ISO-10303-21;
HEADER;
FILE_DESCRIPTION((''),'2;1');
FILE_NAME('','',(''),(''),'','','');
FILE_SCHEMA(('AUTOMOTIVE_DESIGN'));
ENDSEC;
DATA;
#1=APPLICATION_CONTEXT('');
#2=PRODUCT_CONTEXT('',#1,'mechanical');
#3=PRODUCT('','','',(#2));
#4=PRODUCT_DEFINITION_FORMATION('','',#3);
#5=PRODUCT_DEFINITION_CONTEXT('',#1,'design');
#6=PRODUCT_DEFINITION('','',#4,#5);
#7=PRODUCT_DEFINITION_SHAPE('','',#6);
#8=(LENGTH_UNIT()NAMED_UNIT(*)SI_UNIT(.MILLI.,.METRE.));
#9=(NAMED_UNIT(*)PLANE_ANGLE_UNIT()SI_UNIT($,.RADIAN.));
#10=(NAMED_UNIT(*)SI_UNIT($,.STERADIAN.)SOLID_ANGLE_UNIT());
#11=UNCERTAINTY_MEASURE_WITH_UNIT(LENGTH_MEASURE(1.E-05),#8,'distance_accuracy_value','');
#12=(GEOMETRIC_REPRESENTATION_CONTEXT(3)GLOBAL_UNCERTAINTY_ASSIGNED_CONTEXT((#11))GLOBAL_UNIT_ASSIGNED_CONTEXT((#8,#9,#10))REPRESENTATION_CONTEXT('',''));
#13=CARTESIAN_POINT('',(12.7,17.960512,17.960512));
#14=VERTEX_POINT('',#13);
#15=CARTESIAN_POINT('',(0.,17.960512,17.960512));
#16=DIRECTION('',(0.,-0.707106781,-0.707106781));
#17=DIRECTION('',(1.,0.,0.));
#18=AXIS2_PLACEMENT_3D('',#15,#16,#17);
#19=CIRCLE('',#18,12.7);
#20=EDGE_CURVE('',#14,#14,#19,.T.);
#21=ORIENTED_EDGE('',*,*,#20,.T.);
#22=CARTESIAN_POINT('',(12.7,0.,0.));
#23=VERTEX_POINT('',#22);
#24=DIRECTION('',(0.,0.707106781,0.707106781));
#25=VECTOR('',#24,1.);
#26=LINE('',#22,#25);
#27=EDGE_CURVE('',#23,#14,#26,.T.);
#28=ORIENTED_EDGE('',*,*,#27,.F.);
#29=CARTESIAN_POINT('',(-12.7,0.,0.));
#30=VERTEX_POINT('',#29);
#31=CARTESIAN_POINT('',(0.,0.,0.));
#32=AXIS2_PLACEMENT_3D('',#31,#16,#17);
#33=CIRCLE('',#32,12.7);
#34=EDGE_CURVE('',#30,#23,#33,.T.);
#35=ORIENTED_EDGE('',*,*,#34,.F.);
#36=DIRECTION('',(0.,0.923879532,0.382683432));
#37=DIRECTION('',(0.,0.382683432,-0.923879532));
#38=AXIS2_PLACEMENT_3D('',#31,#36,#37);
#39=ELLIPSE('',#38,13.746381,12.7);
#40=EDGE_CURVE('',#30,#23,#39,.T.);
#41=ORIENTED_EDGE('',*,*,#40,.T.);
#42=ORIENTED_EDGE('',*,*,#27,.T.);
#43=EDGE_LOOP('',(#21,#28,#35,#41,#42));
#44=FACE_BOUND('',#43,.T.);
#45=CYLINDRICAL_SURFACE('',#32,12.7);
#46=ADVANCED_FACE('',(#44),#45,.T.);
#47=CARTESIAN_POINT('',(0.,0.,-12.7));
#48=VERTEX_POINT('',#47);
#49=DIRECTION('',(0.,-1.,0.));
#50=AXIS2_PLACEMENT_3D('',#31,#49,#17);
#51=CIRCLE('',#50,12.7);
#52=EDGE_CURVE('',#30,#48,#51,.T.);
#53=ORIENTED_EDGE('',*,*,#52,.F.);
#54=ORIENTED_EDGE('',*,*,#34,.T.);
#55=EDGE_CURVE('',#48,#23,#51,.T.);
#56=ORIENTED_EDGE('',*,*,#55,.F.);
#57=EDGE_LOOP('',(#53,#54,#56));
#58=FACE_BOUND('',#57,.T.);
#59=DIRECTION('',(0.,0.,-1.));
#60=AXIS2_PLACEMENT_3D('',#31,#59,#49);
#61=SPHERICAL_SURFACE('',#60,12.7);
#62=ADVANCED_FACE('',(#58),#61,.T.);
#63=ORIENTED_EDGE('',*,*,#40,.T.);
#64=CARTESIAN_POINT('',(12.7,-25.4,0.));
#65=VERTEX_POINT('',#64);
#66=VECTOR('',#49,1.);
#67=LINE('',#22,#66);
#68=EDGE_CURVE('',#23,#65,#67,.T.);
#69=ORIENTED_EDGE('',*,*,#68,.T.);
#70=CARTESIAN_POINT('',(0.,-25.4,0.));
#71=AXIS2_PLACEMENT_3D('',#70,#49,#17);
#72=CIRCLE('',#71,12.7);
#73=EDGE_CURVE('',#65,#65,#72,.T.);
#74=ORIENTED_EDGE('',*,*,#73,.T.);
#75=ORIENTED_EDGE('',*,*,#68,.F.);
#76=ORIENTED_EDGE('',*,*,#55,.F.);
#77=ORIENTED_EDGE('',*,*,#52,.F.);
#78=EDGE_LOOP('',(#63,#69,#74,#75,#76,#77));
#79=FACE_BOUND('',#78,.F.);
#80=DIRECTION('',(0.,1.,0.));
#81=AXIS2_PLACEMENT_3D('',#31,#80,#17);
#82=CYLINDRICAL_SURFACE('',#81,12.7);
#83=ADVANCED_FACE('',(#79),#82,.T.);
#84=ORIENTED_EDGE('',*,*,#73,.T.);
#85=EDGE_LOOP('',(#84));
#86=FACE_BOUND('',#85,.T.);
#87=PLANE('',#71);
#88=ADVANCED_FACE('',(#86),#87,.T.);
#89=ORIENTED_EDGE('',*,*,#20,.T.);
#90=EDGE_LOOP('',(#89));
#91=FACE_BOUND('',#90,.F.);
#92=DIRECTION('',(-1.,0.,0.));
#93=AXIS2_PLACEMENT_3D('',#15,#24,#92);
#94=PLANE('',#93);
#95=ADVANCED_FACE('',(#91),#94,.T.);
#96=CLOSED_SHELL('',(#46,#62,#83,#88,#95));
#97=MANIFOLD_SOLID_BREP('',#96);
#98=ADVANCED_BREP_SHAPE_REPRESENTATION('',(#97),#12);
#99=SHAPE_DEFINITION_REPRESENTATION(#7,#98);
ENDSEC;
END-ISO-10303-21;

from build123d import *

# Parameters (mm, degrees)
F5_R     = 12.7
F6_DEPTH = 25.4


# Not quite as in the source:
# - a feature of the source that left no trace in its solid (it failed there, or was rolled back) is left out
# - a pattern or mirror of a feature is missing from the dataset's text; its kind, count and spacing are read off the source's solid


with BuildPart() as f4:
    # F3 (on Right) → F4 (revolve)
    with BuildSketch(Plane.YZ):
        with BuildLine():
            Line((0, -12.7), (0, 12.7))
            ThreePointArc((0, 12.7), (-12.7, 0), (0, -12.7))
        make_face()
    revolve(axis=Axis((0, 0, -2.0618988201), (0, 0, -1)))

    # F5 (on Front) → F6 (join)
    with BuildSketch(Plane.XZ):
        Circle(F5_R)
    f6 = extrude(amount=F6_DEPTH)

    # F6_copies: F6 across plane
    add(f6.mirror(Plane(origin=(0, 0, 0), x_dir=(0, -0.3826834324, 0.9238795325), z_dir=(0, 0.9238795325, 0.3826834324))))


solid = f4.part
